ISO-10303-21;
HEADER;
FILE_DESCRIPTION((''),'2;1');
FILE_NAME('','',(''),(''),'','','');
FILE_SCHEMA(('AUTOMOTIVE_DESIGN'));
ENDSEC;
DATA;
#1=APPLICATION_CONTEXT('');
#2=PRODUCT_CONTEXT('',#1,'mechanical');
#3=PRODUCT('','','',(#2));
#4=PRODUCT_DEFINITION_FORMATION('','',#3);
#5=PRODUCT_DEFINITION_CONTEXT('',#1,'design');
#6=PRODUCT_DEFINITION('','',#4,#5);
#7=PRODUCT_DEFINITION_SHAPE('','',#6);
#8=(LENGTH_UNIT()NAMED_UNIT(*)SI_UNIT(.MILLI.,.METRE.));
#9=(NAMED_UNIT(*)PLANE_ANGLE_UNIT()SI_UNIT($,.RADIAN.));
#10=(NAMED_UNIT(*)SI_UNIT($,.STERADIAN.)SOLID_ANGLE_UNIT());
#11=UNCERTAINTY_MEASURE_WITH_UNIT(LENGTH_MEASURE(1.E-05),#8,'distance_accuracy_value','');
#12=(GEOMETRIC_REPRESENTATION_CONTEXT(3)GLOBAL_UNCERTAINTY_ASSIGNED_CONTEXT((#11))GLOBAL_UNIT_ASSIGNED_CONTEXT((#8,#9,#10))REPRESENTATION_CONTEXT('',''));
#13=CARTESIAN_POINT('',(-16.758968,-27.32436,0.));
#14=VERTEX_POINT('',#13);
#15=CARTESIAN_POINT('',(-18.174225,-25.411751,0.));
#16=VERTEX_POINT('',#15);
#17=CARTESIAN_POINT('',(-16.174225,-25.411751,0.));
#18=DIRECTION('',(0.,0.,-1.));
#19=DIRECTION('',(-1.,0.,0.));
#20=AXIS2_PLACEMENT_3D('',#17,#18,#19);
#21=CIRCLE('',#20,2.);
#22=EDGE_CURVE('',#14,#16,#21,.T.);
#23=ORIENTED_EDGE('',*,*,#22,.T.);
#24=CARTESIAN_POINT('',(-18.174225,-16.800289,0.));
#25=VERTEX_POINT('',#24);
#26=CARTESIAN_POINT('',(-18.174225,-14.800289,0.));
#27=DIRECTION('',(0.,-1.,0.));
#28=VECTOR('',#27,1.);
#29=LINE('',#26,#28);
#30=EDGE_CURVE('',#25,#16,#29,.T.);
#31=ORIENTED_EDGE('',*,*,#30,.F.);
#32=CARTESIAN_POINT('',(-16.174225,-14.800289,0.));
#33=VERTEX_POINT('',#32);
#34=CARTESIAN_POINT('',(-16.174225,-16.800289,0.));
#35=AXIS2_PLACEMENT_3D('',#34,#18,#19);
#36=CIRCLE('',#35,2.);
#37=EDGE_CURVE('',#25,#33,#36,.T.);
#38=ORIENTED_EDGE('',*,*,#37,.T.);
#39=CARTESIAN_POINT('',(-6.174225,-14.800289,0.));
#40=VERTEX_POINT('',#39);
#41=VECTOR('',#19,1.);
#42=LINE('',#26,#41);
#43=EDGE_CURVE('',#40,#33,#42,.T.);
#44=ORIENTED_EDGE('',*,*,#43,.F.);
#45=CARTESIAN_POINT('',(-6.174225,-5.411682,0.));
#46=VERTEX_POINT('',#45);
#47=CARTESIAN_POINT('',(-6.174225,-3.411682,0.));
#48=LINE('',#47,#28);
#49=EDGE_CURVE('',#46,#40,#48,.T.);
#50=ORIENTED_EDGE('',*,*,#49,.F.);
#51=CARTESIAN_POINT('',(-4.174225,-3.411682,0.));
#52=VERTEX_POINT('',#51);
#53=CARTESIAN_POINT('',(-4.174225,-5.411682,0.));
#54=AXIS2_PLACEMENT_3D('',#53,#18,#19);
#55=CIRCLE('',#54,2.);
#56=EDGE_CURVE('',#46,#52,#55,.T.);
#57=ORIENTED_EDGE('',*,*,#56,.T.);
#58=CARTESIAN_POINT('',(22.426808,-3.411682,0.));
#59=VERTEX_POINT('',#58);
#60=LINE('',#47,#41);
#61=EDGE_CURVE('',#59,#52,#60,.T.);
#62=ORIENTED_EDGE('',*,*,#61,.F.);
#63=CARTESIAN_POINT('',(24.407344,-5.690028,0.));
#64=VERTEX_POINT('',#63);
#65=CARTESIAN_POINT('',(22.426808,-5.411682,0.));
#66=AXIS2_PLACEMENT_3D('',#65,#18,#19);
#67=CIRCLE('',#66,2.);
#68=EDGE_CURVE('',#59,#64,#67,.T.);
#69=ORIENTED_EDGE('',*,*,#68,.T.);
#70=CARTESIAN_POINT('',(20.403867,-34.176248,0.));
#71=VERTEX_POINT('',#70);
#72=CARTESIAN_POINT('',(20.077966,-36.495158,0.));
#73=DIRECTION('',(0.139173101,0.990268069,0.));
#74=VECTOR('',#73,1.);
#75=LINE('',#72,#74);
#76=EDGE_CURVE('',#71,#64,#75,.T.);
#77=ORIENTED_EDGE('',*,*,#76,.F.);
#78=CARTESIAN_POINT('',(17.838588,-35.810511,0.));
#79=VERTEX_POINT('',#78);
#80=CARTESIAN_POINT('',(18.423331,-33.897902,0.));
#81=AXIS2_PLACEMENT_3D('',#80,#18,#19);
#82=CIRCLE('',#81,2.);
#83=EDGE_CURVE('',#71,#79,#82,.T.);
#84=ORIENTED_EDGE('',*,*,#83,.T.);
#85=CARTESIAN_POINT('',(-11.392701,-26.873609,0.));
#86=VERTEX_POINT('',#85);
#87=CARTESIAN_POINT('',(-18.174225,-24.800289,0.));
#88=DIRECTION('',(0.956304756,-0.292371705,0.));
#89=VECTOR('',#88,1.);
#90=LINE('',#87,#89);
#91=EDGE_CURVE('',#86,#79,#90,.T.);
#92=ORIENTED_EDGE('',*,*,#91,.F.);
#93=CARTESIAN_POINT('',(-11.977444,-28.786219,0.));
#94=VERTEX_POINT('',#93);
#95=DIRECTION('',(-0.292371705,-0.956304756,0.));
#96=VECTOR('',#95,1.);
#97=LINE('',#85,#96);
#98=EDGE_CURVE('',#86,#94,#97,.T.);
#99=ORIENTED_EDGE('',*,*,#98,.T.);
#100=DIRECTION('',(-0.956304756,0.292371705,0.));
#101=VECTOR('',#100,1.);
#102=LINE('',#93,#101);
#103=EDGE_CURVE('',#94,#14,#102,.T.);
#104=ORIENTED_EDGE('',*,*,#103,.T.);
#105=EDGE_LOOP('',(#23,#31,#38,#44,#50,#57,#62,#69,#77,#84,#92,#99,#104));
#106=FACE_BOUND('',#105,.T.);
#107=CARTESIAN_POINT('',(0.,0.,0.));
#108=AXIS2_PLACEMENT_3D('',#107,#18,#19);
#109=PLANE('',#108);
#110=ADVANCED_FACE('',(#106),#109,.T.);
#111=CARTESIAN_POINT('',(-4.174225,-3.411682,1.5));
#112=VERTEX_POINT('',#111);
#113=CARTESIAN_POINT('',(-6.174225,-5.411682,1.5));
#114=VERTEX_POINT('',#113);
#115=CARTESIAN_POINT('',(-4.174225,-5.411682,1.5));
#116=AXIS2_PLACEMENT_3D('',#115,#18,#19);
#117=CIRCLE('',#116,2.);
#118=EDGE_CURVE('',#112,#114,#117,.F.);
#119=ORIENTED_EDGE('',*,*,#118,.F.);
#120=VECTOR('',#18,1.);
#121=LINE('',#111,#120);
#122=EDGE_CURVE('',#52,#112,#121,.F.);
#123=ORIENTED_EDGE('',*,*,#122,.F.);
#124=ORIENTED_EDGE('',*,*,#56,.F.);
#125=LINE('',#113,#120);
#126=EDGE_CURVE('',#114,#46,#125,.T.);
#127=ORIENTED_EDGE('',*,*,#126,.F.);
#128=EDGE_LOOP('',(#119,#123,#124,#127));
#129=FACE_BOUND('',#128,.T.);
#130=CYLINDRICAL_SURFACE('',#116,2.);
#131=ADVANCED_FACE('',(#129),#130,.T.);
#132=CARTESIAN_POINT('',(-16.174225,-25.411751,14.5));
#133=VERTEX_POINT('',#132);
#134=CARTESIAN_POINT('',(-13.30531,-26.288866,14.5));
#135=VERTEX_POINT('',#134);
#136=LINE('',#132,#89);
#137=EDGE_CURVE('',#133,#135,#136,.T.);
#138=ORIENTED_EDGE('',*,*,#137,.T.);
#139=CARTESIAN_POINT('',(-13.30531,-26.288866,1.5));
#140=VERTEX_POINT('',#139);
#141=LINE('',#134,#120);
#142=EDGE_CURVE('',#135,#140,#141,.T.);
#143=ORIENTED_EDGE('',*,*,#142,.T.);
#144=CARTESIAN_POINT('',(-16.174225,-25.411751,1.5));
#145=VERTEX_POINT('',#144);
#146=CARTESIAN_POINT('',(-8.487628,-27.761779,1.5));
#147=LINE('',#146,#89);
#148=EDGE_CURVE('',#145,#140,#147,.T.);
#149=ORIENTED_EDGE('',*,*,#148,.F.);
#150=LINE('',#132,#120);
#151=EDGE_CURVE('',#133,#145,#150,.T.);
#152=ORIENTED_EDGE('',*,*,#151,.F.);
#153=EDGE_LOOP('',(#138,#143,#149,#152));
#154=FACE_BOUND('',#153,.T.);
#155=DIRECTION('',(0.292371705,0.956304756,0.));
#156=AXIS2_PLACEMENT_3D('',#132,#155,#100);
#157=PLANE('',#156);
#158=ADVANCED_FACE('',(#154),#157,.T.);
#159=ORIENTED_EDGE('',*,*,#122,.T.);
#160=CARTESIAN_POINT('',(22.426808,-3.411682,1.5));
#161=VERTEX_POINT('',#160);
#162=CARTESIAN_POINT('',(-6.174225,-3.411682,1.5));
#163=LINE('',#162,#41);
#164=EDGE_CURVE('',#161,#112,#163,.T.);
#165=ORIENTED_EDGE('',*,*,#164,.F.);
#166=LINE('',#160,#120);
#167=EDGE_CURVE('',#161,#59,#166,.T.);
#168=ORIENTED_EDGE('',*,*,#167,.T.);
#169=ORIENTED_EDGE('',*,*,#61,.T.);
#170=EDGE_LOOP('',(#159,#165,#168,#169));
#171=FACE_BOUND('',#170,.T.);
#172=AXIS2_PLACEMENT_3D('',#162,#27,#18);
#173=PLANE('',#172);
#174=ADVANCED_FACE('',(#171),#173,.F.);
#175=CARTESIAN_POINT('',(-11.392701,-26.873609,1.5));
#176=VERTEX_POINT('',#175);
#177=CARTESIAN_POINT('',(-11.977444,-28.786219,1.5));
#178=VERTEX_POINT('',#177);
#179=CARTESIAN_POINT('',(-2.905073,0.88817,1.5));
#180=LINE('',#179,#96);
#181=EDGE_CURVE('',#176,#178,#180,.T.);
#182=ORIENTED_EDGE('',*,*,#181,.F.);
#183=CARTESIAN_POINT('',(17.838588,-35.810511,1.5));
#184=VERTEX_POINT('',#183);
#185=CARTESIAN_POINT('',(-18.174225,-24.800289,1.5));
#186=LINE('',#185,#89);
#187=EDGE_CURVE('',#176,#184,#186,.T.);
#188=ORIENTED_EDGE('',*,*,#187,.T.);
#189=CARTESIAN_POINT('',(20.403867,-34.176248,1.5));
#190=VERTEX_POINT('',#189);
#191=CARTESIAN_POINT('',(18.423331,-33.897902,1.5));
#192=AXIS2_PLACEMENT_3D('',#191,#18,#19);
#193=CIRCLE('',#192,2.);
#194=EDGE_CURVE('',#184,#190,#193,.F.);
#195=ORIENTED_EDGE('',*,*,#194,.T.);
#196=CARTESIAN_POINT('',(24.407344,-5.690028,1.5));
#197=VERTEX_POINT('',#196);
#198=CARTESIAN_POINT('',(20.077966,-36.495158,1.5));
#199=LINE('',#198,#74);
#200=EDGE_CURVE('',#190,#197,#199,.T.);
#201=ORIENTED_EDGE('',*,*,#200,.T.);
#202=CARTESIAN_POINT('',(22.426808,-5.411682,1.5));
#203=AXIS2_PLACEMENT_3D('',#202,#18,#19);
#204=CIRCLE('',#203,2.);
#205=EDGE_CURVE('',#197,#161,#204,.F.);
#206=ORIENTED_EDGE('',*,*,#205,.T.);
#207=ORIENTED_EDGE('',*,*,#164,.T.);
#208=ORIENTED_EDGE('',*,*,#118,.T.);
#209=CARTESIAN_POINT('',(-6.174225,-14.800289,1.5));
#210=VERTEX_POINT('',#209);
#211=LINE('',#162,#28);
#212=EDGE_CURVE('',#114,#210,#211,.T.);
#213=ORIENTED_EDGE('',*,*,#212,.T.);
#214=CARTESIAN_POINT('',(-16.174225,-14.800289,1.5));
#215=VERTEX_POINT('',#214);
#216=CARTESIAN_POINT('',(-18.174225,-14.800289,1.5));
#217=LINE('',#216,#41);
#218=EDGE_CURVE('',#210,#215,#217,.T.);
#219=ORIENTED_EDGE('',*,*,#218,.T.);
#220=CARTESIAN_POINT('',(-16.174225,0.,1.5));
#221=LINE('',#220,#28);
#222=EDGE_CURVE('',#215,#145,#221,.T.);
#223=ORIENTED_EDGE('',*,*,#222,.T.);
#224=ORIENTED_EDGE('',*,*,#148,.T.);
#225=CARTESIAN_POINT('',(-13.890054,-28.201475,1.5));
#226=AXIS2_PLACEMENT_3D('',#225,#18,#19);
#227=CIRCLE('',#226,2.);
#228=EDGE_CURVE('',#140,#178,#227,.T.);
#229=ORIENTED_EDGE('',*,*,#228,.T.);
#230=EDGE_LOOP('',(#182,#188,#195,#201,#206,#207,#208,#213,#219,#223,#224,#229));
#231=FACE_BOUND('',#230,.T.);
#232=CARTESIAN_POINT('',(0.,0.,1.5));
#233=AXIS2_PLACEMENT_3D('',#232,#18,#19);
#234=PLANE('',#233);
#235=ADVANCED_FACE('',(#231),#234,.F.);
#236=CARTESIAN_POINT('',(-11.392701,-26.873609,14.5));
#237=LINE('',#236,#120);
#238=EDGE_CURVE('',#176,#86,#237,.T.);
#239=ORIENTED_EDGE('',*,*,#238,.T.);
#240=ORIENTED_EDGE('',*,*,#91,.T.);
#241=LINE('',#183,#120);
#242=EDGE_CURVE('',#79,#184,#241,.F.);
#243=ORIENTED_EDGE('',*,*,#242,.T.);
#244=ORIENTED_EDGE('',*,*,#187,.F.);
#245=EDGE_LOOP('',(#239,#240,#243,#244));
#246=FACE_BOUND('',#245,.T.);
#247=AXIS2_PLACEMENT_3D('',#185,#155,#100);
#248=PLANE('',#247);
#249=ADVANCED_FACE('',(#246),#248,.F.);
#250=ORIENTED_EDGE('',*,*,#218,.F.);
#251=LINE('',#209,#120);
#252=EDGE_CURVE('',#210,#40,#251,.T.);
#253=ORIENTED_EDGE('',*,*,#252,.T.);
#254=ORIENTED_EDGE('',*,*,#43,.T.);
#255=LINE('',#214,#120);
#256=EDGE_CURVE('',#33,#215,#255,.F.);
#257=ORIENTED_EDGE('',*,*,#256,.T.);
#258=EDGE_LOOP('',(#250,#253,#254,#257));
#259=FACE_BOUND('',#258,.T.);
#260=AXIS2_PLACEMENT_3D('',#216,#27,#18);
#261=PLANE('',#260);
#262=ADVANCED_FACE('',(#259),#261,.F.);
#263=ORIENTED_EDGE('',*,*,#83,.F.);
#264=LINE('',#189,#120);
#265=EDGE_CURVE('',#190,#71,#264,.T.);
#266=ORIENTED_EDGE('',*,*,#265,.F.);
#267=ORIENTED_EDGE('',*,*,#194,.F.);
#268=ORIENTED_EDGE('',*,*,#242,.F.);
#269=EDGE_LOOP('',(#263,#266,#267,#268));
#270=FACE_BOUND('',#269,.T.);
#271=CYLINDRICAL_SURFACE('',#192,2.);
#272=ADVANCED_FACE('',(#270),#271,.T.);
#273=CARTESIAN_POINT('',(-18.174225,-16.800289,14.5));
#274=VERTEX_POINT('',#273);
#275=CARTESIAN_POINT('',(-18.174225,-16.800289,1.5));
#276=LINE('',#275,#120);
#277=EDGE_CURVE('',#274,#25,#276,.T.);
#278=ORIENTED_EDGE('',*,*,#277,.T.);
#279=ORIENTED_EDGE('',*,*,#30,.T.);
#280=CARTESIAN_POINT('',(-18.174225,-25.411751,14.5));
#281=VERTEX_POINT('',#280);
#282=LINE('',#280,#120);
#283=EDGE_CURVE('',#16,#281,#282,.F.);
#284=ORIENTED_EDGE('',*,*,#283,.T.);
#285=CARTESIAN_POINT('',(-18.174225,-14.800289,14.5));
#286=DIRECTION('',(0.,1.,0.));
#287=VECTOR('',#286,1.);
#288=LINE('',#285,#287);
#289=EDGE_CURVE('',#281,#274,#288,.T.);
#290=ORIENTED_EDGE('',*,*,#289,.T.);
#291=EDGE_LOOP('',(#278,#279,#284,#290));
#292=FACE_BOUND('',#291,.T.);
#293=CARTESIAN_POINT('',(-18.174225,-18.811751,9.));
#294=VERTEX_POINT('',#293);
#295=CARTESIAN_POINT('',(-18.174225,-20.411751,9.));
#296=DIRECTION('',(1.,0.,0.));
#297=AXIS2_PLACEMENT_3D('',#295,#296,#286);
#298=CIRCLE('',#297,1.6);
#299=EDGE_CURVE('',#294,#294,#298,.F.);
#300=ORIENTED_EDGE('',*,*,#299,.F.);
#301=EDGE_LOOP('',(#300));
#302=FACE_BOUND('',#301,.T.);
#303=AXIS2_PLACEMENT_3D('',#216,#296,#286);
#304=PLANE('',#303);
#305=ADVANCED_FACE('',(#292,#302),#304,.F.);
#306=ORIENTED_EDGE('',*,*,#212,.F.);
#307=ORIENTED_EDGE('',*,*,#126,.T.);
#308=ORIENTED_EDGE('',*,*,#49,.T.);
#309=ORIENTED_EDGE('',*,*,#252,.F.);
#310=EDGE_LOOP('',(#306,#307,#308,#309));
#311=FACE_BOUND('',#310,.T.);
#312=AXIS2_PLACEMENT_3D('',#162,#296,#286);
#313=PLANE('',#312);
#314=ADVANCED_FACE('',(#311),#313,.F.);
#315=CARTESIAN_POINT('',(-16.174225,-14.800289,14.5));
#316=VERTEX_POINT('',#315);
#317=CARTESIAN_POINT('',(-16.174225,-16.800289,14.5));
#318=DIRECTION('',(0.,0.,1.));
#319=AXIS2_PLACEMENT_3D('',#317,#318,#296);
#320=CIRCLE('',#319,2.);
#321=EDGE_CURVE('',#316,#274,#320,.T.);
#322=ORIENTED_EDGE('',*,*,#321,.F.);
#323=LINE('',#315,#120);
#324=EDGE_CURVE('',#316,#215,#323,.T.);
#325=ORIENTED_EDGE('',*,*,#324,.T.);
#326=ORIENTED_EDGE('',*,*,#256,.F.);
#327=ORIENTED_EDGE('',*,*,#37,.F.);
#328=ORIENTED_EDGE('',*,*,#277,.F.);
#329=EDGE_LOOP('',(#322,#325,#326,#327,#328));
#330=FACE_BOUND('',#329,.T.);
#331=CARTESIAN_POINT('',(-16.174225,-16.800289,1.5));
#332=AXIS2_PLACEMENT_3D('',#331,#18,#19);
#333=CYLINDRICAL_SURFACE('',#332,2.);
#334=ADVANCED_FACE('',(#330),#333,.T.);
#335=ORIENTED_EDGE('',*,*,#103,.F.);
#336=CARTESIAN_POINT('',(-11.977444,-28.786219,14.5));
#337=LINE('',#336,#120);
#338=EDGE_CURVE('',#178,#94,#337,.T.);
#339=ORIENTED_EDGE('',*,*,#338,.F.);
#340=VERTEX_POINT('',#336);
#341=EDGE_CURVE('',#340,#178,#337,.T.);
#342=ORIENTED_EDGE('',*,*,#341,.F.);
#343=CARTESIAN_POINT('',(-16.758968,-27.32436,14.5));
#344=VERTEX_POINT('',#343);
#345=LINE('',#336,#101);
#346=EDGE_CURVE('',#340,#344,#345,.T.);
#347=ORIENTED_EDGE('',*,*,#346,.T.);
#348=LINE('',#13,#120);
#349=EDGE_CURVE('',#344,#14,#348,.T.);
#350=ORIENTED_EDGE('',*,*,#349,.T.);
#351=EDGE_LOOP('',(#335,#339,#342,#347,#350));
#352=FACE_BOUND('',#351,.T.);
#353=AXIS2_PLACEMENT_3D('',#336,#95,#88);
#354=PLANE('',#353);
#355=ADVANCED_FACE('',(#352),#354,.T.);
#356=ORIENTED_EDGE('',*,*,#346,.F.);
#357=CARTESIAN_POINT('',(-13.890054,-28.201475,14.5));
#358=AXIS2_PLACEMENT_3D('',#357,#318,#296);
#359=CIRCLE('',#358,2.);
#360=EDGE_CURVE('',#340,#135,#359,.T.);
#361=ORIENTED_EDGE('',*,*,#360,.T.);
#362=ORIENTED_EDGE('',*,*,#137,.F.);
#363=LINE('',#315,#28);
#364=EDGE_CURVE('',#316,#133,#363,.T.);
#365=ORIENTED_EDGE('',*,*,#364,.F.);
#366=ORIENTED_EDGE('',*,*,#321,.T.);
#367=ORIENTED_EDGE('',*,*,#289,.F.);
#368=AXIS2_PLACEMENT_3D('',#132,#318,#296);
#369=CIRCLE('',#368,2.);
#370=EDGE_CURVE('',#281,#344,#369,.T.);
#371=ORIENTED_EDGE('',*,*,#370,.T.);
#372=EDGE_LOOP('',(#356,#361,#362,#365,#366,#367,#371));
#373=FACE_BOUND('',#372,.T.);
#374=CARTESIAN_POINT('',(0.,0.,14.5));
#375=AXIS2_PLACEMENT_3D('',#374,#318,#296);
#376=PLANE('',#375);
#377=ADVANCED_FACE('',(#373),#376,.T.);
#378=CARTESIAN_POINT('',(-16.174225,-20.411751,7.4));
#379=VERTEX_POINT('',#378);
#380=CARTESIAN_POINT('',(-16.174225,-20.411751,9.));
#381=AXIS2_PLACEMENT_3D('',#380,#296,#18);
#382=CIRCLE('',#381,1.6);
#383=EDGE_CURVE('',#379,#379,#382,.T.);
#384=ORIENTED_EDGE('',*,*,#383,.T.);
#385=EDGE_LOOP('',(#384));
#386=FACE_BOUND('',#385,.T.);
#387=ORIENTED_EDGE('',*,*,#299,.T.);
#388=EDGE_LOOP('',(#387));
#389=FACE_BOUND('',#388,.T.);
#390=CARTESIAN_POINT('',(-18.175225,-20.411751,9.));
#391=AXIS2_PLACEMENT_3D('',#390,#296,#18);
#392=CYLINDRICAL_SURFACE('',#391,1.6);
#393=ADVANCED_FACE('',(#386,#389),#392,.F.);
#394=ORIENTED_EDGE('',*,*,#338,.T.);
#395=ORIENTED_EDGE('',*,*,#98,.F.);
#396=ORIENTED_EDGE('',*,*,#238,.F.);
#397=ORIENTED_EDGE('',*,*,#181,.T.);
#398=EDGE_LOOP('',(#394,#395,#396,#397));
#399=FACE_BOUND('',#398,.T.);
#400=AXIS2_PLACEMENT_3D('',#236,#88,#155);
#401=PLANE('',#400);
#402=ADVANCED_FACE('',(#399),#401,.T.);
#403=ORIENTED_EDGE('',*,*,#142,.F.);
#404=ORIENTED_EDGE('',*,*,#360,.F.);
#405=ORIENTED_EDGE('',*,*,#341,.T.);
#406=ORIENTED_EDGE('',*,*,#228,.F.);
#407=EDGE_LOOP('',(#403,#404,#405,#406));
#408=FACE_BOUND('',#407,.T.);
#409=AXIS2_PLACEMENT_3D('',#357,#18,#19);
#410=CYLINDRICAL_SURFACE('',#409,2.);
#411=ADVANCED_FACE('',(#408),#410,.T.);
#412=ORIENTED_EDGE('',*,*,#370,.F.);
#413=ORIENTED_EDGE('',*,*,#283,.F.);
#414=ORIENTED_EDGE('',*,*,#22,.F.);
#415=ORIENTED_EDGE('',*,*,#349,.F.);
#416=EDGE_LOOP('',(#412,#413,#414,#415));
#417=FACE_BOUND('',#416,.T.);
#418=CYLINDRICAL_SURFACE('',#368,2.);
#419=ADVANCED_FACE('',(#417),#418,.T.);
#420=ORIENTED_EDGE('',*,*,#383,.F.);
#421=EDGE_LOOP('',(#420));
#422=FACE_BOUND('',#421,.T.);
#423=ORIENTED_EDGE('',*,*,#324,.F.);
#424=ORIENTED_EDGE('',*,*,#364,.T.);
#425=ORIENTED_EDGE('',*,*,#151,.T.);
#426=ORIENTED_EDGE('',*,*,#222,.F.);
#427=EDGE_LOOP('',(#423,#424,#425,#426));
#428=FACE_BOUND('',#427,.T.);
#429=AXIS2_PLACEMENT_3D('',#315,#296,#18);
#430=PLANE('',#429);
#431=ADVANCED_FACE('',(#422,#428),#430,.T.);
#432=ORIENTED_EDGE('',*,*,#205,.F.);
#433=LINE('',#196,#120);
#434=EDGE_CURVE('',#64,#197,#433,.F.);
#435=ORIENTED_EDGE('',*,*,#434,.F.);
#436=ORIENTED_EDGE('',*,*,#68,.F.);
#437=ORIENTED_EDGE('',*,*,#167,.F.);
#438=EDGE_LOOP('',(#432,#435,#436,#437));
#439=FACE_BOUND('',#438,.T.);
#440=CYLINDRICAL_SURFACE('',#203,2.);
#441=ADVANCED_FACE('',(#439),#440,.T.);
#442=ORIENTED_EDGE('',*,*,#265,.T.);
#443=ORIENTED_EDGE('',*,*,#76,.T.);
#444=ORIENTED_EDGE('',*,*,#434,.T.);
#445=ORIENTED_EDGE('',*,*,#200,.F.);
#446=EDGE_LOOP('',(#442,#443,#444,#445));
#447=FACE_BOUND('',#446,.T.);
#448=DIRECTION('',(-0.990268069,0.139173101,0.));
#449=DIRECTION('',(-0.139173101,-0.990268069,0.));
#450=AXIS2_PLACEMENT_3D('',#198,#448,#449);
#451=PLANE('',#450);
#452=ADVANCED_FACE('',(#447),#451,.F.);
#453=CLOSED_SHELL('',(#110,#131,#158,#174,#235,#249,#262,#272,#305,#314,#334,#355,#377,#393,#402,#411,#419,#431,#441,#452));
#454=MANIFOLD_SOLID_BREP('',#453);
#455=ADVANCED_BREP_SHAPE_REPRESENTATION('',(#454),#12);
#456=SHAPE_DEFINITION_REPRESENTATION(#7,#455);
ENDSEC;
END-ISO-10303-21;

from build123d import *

# Parameters (mm, degrees)
BOSS_EXTRUDE1_DEPTH = 1.5
BOSS_EXTRUDE4_DEPTH = 14.5
FILLET3_R           = 2
CUT_EXTRUDE1_REACH  = 58.101
SKETCH7_R           = 1.6


with BuildPart() as part:
    # Sketch1 → Boss-Extrude1 (new body)
    with BuildSketch(Plane.XY):
        Polygon((-6.174224551, -3.411681894), (24.72754499, -3.411681894), (20.077965687, -36.495157687), (-18.174224551, -24.800289498), (-18.174224551, -14.800289498), (-6.174224551, -14.800289498), align=None)
    extrude(amount=BOSS_EXTRUDE1_DEPTH)

    # Sketch6 → Boss-Extrude4 (add)
    with BuildSketch(Plane(origin=(0, 0, 0), x_dir=(-1, 0, 0), z_dir=(0, 0, -1))):
        Polygon((16.174224551, -25.411750861), (11.392700771, -26.873609384), (11.977444181, -28.786218896), (18.174224551, -26.891673011), (18.174224551, -14.800289498), (16.174224551, -14.800289498), align=None)
    extrude(amount=-BOSS_EXTRUDE4_DEPTH)

    # Fillet3
    fillet3_edges = [part.edges().sort_by_distance(p)[0] for p in [
        (-18.174224551, -26.891673011, 7.25),
        (20.077965687, -36.495157687, 0.75),
        (-6.174224551, -3.411681894, 0.75),
        (24.72754499, -3.411681894, 0.75),
        (-11.392700771, -26.873609384, 8),
        (-18.174224551, -14.800289498, 7.25),
    ]]
    fillet(fillet3_edges, radius=FILLET3_R - 0.0001)  # a hair under: the kernel refuses the full size

    # Sketch7 → Cut-Extrude1 (cut, up to next)
    with BuildSketch(Plane(origin=(-16.174224551, 0, 0), x_dir=(0, 0, -1), z_dir=(1, 0, 0)), mode=Mode.PRIVATE) as cut_extrude1_sk1:
        with Locations((-9, -20.411750861)):
            Circle(SKETCH7_R)
    cut_extrude1_tool1 = extrude(cut_extrude1_sk1.sketch, amount=-CUT_EXTRUDE1_REACH, mode=Mode.PRIVATE) & part.part
    add(cut_extrude1_tool1.solids().sort_by_distance((-16.174225, -20.411751, 9))[0], mode=Mode.SUBTRACT)


solid = part.part
